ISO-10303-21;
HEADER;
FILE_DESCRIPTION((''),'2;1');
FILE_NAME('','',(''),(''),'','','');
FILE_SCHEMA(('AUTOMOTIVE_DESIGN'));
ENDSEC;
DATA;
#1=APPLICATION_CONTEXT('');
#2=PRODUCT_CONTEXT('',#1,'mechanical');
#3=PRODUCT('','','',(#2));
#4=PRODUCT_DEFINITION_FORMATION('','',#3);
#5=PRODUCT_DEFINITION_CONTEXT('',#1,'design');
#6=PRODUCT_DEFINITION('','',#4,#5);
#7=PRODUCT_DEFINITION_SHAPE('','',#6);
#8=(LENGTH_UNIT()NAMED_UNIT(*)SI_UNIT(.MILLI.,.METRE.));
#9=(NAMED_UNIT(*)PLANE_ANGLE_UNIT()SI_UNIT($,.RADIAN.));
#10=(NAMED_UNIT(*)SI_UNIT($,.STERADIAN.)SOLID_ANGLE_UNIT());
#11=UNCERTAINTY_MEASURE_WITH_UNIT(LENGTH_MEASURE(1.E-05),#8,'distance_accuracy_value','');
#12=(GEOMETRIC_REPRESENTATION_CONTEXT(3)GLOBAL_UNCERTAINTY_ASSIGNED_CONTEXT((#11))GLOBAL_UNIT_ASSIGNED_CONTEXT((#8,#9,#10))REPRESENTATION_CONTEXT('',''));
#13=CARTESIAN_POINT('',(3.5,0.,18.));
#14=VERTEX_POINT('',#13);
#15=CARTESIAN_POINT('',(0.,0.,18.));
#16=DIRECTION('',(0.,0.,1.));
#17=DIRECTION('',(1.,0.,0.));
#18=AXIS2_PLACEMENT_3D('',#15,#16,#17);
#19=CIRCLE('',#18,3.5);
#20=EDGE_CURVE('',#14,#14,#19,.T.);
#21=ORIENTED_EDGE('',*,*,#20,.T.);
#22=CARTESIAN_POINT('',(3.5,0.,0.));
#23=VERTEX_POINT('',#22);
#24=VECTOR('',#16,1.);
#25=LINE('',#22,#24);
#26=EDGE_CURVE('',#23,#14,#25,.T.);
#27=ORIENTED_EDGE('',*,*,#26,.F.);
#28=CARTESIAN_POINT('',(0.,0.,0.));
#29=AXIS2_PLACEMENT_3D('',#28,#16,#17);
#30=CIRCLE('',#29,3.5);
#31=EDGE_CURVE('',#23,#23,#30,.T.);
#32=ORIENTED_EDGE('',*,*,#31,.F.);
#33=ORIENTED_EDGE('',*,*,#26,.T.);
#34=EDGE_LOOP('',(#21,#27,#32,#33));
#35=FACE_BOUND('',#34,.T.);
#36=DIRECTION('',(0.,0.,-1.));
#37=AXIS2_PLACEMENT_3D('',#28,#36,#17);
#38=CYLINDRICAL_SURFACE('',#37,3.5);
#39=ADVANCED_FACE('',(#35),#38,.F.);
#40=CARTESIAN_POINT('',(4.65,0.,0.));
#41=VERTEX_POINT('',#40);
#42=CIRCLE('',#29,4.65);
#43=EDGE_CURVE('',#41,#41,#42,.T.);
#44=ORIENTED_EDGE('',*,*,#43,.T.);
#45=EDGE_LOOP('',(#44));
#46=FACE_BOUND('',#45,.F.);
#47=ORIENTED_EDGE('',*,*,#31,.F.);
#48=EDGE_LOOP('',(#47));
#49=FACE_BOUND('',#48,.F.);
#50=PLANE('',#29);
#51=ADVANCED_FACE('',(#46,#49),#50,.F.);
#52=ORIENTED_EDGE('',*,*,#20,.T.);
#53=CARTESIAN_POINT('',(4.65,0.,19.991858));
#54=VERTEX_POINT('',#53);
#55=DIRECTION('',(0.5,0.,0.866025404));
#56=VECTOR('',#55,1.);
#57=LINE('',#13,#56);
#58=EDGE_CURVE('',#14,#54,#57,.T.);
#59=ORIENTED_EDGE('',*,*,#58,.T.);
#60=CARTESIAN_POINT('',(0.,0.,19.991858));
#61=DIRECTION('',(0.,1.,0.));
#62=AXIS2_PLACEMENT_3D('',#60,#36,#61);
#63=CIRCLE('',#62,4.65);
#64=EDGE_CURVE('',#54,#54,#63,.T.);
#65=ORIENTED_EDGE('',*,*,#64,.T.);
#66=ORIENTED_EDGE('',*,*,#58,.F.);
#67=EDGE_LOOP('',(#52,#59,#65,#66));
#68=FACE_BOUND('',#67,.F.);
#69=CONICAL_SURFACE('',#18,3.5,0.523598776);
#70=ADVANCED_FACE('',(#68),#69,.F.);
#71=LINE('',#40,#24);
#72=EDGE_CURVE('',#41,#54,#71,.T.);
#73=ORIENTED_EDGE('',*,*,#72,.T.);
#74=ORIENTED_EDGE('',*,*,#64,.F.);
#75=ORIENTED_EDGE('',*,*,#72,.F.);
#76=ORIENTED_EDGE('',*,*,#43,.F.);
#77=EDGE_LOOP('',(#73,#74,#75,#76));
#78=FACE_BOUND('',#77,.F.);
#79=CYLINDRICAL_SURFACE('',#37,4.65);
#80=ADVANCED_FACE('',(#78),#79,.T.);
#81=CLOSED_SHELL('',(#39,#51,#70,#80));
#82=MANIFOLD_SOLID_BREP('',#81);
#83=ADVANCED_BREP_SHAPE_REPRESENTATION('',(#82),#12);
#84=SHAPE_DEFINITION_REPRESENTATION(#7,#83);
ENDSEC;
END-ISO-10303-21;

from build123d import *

# Parameters (mm, degrees)
F0_R     = 4.65
F0_R_2   = 3.5
F1_DEPTH = 20


# Not quite as in the source:
# - a fillet or chamfer that OpenCascade refuses, or shapes differently, is made with other operations: its cross-section is extruded or revolved along the edge and cut away or added


with BuildPart() as f1:
    # F0 (on Top) → F1 (new body)
    with BuildSketch(Plane.XY):
        Circle(F0_R)
        Circle(F0_R_2, mode=Mode.SUBTRACT)
    extrude(amount=F1_DEPTH)

    # F2: chamfer of 2 x 1.1547005384 on 1 edges, made by hand

    # F2_s1 → F2_t2 (revolve, cut)
    with BuildSketch(Plane.XZ):
        Polygon((3.5, 18), (4.6547005384, 20), (3.5, 20), align=None)
    revolve(axis=Axis((0, 0, 20), (0, 0, 1)), mode=Mode.SUBTRACT)


solid = f1.part
